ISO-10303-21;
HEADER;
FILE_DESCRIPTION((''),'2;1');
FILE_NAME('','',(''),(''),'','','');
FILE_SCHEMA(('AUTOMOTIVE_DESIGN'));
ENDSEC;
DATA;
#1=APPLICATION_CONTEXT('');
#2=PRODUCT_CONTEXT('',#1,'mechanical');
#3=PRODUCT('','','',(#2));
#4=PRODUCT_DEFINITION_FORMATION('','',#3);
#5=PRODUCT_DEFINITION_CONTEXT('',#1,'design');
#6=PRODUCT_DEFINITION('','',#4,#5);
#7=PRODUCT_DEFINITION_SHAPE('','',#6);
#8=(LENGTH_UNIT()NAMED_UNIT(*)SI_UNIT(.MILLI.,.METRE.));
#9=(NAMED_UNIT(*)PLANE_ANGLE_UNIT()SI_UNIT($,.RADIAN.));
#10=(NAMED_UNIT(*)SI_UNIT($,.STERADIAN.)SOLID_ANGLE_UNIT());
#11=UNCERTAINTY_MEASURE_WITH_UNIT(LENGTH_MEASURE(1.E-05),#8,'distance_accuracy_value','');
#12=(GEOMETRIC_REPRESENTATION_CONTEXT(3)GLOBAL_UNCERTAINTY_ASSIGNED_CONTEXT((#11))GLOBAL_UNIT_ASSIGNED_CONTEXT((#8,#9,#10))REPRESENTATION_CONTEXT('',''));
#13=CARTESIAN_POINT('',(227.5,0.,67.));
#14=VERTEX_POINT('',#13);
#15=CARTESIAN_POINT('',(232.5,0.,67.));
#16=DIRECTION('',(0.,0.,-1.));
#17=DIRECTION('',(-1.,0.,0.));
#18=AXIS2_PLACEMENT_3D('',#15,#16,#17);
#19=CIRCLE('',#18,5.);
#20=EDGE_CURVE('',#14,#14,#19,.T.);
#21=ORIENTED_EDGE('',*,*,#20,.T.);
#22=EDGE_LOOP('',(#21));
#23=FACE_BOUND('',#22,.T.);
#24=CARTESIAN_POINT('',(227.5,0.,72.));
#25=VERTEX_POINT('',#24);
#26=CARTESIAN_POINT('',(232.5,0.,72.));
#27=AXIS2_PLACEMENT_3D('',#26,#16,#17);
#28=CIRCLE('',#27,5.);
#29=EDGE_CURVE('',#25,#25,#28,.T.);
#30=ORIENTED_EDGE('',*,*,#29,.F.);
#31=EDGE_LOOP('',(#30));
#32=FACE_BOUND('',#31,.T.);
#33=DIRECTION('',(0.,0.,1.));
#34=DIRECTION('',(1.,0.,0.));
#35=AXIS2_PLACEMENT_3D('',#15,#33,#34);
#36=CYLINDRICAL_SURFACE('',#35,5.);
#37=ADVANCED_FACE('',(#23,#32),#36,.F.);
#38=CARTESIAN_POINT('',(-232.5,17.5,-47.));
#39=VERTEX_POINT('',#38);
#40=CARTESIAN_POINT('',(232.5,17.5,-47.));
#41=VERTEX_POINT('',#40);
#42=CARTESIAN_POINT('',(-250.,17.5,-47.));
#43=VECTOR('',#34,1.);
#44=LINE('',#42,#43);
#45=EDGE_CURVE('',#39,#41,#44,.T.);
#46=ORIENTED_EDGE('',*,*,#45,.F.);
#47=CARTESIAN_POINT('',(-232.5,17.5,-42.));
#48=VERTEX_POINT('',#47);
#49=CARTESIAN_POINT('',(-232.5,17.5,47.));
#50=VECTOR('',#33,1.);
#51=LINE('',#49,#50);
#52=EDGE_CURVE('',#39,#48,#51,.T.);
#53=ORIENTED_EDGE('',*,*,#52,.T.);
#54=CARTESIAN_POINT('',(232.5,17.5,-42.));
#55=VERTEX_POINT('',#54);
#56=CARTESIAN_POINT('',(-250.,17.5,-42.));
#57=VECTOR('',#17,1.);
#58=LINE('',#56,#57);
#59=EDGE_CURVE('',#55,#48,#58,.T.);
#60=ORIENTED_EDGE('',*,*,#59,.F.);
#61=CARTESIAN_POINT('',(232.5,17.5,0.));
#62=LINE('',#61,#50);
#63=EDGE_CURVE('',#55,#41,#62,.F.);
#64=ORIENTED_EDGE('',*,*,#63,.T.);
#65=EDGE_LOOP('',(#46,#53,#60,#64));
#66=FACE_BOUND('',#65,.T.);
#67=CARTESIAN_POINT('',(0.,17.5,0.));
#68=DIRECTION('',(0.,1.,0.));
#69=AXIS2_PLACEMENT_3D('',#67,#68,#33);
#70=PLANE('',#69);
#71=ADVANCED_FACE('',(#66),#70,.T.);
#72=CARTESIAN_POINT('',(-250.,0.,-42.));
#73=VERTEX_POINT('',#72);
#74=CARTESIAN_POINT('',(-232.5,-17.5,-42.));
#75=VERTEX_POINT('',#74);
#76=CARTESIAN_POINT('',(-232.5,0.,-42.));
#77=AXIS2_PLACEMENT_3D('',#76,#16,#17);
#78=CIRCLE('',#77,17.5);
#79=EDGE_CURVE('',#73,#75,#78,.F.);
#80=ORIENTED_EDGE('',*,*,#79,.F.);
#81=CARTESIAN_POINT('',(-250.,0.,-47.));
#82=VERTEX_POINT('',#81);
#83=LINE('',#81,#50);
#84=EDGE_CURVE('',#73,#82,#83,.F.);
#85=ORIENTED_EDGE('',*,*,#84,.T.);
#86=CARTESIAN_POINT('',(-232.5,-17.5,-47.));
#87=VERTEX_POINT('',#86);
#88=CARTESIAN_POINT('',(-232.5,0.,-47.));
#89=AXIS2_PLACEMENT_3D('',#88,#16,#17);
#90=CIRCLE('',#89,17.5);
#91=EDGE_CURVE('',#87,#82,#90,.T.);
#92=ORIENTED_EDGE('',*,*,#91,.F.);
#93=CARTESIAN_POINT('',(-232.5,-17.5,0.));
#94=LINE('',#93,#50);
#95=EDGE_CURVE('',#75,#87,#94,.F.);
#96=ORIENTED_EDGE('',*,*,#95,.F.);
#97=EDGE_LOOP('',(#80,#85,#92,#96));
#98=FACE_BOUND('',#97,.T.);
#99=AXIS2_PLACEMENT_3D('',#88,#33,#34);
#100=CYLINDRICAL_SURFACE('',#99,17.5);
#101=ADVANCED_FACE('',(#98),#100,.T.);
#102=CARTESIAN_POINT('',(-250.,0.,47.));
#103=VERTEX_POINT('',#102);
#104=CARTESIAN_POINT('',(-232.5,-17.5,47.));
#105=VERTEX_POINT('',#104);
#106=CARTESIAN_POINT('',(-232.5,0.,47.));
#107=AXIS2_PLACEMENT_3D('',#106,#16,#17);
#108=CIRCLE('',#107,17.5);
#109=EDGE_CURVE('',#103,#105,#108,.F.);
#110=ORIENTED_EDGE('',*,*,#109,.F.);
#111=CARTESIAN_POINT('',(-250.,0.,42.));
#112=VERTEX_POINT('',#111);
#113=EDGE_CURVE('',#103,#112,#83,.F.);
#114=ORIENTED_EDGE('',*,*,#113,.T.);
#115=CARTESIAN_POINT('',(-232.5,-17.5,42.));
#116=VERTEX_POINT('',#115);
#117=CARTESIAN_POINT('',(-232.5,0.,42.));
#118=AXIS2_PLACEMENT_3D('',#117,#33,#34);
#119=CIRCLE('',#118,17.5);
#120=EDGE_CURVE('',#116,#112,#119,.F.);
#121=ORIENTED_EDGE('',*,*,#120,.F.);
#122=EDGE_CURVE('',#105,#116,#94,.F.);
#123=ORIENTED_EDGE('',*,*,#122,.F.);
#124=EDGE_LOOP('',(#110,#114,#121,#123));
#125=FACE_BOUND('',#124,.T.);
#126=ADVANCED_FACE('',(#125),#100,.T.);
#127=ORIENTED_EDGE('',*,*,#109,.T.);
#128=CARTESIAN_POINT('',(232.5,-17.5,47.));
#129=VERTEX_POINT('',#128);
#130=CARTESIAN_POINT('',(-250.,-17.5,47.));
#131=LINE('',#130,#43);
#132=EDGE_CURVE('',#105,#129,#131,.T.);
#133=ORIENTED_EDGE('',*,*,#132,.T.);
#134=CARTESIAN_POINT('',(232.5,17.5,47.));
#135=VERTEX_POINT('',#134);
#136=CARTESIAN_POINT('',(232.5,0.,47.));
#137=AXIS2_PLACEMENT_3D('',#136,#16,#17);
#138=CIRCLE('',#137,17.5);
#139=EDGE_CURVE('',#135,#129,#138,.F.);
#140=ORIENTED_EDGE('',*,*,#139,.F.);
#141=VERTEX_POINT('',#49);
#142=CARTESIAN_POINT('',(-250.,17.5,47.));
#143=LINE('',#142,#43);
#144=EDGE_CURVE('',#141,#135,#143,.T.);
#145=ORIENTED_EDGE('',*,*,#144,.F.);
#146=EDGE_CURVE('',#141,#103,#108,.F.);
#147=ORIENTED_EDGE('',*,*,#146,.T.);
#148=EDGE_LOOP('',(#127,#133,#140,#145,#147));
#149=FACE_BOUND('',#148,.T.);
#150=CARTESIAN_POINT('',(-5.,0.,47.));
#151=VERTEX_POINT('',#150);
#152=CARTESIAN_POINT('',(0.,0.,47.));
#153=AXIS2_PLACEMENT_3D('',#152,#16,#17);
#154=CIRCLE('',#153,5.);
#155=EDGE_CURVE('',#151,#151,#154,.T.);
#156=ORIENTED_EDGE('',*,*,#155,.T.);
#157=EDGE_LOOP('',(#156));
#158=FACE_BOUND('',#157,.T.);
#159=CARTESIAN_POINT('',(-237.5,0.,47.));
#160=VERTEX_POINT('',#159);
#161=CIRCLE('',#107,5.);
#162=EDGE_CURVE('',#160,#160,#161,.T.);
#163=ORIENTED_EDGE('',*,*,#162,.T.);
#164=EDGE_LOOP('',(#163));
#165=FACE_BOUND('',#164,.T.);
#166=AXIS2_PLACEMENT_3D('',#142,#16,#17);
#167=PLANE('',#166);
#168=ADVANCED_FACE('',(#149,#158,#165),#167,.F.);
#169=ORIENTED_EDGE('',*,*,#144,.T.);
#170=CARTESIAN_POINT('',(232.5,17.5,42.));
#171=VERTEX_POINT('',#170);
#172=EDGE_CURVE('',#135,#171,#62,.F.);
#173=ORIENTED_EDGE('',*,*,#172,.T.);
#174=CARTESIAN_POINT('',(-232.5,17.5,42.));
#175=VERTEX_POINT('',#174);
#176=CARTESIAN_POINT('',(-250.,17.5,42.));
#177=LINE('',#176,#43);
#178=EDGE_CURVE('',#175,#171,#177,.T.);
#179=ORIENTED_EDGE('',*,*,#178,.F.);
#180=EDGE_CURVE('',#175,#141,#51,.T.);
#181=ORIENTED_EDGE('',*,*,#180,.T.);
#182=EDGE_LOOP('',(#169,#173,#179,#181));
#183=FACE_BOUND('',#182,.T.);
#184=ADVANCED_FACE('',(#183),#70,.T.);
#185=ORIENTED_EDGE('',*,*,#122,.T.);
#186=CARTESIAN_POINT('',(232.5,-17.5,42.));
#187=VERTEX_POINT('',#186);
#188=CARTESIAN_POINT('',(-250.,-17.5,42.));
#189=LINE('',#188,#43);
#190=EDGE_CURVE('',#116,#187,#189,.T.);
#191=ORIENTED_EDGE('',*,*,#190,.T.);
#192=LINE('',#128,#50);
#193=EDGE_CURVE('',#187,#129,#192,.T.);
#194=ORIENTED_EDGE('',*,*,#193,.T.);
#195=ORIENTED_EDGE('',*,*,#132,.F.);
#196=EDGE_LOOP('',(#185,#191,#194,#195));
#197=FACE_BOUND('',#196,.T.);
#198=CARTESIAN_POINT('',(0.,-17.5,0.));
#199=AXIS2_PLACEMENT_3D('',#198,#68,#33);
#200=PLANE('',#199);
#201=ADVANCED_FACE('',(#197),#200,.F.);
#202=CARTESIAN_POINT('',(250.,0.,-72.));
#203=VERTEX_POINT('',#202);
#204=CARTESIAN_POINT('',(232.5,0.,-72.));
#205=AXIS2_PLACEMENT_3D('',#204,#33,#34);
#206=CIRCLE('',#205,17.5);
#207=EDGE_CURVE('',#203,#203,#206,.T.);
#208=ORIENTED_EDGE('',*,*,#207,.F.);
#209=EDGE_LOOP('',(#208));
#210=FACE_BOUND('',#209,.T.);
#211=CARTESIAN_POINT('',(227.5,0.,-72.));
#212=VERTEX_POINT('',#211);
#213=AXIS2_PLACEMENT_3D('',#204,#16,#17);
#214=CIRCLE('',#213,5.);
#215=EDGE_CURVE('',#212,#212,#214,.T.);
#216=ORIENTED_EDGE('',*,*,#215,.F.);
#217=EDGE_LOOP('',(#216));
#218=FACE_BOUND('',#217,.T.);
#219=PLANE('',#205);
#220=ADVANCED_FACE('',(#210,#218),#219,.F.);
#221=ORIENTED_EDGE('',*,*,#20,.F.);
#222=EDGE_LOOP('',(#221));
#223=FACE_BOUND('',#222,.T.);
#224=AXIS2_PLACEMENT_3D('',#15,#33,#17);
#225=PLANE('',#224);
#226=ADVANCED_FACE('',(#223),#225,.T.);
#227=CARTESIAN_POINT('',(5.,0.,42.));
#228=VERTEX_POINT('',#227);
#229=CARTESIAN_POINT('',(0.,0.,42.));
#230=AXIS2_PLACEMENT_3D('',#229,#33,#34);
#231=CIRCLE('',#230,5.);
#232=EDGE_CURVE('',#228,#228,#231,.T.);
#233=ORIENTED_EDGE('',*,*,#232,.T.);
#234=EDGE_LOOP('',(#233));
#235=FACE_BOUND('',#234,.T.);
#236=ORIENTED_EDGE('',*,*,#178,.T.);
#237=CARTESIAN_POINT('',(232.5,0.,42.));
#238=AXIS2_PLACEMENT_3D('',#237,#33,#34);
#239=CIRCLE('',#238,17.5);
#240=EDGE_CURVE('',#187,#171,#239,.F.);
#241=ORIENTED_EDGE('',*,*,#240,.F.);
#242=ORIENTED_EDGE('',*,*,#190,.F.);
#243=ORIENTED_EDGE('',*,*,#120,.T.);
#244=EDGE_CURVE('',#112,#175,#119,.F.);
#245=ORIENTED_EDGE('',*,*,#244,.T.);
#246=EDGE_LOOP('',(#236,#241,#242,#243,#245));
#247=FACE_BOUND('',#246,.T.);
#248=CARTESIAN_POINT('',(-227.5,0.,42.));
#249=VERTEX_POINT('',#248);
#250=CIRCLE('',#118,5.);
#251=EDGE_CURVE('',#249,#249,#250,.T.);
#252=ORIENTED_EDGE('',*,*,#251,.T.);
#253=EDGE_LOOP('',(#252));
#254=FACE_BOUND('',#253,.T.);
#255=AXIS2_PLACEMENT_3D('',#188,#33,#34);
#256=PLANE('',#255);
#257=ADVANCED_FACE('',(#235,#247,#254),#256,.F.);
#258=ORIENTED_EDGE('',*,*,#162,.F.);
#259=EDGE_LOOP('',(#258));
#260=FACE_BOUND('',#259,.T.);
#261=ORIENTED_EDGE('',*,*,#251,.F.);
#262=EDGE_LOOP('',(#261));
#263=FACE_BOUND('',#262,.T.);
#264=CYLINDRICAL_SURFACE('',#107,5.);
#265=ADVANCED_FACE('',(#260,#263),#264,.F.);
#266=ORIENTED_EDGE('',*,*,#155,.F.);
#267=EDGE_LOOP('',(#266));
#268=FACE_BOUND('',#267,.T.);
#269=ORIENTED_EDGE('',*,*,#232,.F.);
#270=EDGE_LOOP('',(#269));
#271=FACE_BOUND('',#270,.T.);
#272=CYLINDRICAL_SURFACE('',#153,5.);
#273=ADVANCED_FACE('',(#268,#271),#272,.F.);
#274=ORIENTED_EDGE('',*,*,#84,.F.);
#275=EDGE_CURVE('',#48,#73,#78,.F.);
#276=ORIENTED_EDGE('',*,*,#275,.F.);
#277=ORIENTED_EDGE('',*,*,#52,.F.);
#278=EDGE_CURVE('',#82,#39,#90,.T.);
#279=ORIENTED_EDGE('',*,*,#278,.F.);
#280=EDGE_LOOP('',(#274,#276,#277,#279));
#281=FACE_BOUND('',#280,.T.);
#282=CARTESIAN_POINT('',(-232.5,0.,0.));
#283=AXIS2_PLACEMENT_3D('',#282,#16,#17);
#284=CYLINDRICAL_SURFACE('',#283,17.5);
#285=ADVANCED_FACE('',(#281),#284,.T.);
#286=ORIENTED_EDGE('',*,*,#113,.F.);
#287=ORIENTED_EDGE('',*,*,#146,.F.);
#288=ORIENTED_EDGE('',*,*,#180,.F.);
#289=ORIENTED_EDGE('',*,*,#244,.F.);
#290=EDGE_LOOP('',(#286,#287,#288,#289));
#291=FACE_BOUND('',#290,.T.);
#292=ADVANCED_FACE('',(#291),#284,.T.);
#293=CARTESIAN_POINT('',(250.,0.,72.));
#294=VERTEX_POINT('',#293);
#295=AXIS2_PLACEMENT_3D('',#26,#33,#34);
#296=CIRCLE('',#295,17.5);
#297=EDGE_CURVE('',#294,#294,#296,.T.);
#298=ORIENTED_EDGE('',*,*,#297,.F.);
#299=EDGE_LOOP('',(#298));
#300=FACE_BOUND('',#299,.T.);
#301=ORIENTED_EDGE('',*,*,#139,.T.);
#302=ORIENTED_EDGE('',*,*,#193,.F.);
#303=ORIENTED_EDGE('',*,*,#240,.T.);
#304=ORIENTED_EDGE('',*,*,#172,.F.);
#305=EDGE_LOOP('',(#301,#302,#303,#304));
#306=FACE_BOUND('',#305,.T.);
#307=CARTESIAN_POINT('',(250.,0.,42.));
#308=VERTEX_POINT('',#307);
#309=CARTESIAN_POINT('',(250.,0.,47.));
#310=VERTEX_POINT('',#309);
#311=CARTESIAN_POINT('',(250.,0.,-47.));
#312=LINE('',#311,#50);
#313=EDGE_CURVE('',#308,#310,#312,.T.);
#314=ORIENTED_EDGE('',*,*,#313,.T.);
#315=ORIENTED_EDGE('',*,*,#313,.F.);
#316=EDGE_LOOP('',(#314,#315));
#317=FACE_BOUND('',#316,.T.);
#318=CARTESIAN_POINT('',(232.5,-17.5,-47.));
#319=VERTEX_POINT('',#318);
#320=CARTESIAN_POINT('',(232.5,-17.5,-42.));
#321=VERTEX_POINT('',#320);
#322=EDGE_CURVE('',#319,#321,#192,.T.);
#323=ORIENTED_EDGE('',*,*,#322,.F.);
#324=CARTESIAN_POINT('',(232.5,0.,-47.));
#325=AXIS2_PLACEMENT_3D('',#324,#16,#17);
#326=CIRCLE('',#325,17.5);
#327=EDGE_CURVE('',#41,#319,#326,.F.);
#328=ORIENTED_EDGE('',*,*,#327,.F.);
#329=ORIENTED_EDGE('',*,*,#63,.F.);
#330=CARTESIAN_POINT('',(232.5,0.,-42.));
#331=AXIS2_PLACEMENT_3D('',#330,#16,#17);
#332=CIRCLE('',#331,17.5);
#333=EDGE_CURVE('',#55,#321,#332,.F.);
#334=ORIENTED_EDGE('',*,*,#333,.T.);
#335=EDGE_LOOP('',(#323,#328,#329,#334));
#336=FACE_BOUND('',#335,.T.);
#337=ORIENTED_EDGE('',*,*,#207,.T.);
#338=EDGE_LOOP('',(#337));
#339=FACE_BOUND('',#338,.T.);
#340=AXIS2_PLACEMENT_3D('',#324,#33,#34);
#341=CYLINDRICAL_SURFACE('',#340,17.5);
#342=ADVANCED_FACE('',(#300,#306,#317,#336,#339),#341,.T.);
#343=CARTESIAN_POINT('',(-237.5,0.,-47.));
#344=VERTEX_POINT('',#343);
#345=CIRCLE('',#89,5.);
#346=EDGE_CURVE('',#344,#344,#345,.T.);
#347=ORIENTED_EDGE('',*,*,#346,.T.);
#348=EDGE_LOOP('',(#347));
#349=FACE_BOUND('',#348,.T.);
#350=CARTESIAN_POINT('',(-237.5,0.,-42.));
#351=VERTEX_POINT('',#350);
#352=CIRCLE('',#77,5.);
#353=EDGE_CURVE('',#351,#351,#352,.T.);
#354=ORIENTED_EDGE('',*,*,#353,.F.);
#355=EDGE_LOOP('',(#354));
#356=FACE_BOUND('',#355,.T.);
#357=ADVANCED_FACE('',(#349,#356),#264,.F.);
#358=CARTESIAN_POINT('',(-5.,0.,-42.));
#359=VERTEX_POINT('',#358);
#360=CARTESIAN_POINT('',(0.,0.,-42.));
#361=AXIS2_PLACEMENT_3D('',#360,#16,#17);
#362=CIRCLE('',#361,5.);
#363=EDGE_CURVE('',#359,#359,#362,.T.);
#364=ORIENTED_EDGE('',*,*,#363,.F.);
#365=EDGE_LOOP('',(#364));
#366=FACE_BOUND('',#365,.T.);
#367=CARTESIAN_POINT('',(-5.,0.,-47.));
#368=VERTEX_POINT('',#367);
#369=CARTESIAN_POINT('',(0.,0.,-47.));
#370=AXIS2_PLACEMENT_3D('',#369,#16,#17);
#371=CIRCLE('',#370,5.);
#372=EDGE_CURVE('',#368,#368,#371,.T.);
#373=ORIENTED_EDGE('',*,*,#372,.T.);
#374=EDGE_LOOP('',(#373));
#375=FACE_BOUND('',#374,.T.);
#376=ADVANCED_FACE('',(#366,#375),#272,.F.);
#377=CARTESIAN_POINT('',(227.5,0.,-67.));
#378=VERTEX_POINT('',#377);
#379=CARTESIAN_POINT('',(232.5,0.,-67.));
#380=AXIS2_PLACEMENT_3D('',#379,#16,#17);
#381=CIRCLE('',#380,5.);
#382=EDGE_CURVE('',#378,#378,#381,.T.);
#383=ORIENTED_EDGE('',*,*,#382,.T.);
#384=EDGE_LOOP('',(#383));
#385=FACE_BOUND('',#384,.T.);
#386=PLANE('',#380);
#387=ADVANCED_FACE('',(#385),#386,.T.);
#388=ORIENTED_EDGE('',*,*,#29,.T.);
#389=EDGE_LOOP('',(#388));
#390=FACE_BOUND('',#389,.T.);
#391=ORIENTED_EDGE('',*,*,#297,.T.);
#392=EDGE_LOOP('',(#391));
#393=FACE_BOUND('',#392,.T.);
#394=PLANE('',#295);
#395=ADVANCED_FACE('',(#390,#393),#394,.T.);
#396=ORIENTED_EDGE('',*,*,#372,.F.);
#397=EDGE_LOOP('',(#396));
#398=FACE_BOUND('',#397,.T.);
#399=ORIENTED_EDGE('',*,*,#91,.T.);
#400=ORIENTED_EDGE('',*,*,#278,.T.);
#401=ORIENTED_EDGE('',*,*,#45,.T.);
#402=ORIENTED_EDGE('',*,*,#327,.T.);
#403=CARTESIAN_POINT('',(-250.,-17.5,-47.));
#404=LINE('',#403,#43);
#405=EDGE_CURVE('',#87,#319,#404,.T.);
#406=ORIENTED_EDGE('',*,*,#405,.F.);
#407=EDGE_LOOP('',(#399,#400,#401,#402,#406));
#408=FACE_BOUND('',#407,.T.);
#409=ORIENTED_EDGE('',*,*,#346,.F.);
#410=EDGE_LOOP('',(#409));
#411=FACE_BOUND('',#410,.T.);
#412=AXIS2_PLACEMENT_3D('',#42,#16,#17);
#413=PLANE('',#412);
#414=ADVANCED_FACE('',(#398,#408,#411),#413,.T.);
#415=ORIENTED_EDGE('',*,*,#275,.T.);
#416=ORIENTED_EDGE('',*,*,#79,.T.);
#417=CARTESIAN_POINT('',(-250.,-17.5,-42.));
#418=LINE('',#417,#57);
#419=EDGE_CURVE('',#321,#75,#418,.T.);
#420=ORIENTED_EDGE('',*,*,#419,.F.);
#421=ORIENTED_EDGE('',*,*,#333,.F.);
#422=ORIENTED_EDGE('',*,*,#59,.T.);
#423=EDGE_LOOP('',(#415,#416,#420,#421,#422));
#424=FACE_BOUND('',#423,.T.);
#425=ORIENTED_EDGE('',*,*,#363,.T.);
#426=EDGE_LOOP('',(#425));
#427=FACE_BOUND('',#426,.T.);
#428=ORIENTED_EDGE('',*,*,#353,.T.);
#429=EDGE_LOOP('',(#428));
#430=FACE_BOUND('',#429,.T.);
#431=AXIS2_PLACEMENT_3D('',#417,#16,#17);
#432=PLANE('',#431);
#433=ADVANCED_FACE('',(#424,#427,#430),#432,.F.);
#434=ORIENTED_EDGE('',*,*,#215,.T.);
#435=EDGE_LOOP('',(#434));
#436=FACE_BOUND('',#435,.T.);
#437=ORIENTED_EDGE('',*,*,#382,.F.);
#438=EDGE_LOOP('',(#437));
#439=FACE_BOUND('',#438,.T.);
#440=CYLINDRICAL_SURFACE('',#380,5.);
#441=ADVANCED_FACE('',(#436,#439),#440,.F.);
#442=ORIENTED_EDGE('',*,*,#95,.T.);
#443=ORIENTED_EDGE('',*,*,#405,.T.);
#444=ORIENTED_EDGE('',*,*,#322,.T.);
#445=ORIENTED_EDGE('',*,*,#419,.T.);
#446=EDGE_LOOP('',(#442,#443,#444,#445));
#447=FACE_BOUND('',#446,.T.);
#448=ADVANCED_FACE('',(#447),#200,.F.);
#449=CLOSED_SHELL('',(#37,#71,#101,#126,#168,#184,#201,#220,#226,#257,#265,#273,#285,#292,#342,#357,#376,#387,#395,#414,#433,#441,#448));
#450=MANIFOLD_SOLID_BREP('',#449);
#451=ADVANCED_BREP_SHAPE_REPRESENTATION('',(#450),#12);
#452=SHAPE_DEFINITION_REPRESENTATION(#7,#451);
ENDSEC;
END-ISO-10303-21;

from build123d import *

# Parameters (mm, degrees)
SKETCH3_W           = 500
SKETCH3_H           = 94
BOSS_EXTRUDE3_DEPTH = 17.5
FILLET2_R           = 17.5
SKETCH4_W           = 500
SKETCH4_H           = 84
CUT_EXTRUDE2_DEPTH  = 35
SKETCH9_R           = 5
CUT_EXTRUDE4_DEPTH  = 268.660699394
SKETCH5_R           = 17.5
BOSS_EXTRUDE4_DEPTH = 72
SKETCH8_R           = 5
CUT_EXTRUDE3_DEPTH  = 5


with BuildPart() as part:
    # Sketch3 → Boss-Extrude3 (new, symmetric)
    with BuildSketch(Plane(origin=(0, 0, 0), x_dir=(1, 0, 0), z_dir=(0, 1, 0))):
        Rectangle(SKETCH3_W, SKETCH3_H)
    extrude(amount=BOSS_EXTRUDE3_DEPTH, both=True)

    # Fillet2
    fillet2_edges = [part.edges().sort_by_distance(p)[0] for p in [
        (250, -17.5, 0),
        (250, 17.5, 0),
        (-250, -17.5, 0),
        (-250, 17.5, 0),
    ]]
    fillet(fillet2_edges, radius=FILLET2_R - 0.0001)  # a hair under: the kernel refuses the full size

    # Sketch4 → Cut-Extrude2 (cut)
    with BuildSketch(Plane(origin=(0, 17.5, 0), x_dir=(1, 0, 0), z_dir=(0, 1, 0))):
        Rectangle(SKETCH4_W, SKETCH4_H)
    extrude(amount=-CUT_EXTRUDE2_DEPTH, mode=Mode.SUBTRACT)


with BuildPart() as cut_extrude2_piece_1:
    # of the separate pieces the step leaves, piece 1, a body of its own (cut_extrude2_pieces)
    add(part.part.solids().sort_by_distance((-250, -0.0001, -47))[0])


with BuildPart() as cut_extrude2_piece_2:
    # of the separate pieces the step leaves, piece 2, a body of its own (cut_extrude2_pieces)
    add(part.part.solids().sort_by_distance((-250, -0.0001, 47))[0])


with BuildPart() as cut_extrude4_tool:
    # Sketch9 → Cut-Extrude4 (new, through all)
    with BuildSketch(Plane(origin=(0, 0, -47), x_dir=(-1, 0, 0), z_dir=(0, 0, -1))):
        Circle(SKETCH9_R)
        with Locations((232.5, 0)):
            Circle(SKETCH9_R)
    extrude(amount=-CUT_EXTRUDE4_DEPTH)


with BuildPart() as cut_extrude2_piece_1_1:
    add(cut_extrude2_piece_1.part)

    # Cut-Extrude4: cut by cut_extrude4_tool
    add(cut_extrude4_tool.part, mode=Mode.SUBTRACT)



with BuildPart() as cut_extrude2_piece_2_1:
    add(cut_extrude2_piece_2.part)

    # Cut-Extrude4: cut by cut_extrude4_tool
    add(cut_extrude4_tool.part, mode=Mode.SUBTRACT)


with BuildPart() as cut_extrude2_piece_1_2:
    add(cut_extrude2_piece_1_1.part)

    add(cut_extrude2_piece_2_1.part)  # Boss-Extrude4 merges Cut-Extrude2 piece 2
    # Sketch5 → Boss-Extrude4 (add, symmetric)
    with BuildSketch(Plane.XY):
        with Locations((232.5, 0)):
            Circle(SKETCH5_R)
    extrude(amount=BOSS_EXTRUDE4_DEPTH, both=True)

    # Sketch8 → Cut-Extrude3 (cut)
    with BuildSketch(Plane(origin=(0, 0, -72), x_dir=(-1, 0, 0), z_dir=(0, 0, -1))):
        with Locations((-232.5, 0)):
            Circle(SKETCH8_R)
    cut_extrude3 = extrude(amount=-CUT_EXTRUDE3_DEPTH, mode=Mode.SUBTRACT)

    # Mirror1: Cut-Extrude3 across plane
    add(cut_extrude3.mirror(Plane.XY), mode=Mode.SUBTRACT)


solid = cut_extrude2_piece_1_2.part
